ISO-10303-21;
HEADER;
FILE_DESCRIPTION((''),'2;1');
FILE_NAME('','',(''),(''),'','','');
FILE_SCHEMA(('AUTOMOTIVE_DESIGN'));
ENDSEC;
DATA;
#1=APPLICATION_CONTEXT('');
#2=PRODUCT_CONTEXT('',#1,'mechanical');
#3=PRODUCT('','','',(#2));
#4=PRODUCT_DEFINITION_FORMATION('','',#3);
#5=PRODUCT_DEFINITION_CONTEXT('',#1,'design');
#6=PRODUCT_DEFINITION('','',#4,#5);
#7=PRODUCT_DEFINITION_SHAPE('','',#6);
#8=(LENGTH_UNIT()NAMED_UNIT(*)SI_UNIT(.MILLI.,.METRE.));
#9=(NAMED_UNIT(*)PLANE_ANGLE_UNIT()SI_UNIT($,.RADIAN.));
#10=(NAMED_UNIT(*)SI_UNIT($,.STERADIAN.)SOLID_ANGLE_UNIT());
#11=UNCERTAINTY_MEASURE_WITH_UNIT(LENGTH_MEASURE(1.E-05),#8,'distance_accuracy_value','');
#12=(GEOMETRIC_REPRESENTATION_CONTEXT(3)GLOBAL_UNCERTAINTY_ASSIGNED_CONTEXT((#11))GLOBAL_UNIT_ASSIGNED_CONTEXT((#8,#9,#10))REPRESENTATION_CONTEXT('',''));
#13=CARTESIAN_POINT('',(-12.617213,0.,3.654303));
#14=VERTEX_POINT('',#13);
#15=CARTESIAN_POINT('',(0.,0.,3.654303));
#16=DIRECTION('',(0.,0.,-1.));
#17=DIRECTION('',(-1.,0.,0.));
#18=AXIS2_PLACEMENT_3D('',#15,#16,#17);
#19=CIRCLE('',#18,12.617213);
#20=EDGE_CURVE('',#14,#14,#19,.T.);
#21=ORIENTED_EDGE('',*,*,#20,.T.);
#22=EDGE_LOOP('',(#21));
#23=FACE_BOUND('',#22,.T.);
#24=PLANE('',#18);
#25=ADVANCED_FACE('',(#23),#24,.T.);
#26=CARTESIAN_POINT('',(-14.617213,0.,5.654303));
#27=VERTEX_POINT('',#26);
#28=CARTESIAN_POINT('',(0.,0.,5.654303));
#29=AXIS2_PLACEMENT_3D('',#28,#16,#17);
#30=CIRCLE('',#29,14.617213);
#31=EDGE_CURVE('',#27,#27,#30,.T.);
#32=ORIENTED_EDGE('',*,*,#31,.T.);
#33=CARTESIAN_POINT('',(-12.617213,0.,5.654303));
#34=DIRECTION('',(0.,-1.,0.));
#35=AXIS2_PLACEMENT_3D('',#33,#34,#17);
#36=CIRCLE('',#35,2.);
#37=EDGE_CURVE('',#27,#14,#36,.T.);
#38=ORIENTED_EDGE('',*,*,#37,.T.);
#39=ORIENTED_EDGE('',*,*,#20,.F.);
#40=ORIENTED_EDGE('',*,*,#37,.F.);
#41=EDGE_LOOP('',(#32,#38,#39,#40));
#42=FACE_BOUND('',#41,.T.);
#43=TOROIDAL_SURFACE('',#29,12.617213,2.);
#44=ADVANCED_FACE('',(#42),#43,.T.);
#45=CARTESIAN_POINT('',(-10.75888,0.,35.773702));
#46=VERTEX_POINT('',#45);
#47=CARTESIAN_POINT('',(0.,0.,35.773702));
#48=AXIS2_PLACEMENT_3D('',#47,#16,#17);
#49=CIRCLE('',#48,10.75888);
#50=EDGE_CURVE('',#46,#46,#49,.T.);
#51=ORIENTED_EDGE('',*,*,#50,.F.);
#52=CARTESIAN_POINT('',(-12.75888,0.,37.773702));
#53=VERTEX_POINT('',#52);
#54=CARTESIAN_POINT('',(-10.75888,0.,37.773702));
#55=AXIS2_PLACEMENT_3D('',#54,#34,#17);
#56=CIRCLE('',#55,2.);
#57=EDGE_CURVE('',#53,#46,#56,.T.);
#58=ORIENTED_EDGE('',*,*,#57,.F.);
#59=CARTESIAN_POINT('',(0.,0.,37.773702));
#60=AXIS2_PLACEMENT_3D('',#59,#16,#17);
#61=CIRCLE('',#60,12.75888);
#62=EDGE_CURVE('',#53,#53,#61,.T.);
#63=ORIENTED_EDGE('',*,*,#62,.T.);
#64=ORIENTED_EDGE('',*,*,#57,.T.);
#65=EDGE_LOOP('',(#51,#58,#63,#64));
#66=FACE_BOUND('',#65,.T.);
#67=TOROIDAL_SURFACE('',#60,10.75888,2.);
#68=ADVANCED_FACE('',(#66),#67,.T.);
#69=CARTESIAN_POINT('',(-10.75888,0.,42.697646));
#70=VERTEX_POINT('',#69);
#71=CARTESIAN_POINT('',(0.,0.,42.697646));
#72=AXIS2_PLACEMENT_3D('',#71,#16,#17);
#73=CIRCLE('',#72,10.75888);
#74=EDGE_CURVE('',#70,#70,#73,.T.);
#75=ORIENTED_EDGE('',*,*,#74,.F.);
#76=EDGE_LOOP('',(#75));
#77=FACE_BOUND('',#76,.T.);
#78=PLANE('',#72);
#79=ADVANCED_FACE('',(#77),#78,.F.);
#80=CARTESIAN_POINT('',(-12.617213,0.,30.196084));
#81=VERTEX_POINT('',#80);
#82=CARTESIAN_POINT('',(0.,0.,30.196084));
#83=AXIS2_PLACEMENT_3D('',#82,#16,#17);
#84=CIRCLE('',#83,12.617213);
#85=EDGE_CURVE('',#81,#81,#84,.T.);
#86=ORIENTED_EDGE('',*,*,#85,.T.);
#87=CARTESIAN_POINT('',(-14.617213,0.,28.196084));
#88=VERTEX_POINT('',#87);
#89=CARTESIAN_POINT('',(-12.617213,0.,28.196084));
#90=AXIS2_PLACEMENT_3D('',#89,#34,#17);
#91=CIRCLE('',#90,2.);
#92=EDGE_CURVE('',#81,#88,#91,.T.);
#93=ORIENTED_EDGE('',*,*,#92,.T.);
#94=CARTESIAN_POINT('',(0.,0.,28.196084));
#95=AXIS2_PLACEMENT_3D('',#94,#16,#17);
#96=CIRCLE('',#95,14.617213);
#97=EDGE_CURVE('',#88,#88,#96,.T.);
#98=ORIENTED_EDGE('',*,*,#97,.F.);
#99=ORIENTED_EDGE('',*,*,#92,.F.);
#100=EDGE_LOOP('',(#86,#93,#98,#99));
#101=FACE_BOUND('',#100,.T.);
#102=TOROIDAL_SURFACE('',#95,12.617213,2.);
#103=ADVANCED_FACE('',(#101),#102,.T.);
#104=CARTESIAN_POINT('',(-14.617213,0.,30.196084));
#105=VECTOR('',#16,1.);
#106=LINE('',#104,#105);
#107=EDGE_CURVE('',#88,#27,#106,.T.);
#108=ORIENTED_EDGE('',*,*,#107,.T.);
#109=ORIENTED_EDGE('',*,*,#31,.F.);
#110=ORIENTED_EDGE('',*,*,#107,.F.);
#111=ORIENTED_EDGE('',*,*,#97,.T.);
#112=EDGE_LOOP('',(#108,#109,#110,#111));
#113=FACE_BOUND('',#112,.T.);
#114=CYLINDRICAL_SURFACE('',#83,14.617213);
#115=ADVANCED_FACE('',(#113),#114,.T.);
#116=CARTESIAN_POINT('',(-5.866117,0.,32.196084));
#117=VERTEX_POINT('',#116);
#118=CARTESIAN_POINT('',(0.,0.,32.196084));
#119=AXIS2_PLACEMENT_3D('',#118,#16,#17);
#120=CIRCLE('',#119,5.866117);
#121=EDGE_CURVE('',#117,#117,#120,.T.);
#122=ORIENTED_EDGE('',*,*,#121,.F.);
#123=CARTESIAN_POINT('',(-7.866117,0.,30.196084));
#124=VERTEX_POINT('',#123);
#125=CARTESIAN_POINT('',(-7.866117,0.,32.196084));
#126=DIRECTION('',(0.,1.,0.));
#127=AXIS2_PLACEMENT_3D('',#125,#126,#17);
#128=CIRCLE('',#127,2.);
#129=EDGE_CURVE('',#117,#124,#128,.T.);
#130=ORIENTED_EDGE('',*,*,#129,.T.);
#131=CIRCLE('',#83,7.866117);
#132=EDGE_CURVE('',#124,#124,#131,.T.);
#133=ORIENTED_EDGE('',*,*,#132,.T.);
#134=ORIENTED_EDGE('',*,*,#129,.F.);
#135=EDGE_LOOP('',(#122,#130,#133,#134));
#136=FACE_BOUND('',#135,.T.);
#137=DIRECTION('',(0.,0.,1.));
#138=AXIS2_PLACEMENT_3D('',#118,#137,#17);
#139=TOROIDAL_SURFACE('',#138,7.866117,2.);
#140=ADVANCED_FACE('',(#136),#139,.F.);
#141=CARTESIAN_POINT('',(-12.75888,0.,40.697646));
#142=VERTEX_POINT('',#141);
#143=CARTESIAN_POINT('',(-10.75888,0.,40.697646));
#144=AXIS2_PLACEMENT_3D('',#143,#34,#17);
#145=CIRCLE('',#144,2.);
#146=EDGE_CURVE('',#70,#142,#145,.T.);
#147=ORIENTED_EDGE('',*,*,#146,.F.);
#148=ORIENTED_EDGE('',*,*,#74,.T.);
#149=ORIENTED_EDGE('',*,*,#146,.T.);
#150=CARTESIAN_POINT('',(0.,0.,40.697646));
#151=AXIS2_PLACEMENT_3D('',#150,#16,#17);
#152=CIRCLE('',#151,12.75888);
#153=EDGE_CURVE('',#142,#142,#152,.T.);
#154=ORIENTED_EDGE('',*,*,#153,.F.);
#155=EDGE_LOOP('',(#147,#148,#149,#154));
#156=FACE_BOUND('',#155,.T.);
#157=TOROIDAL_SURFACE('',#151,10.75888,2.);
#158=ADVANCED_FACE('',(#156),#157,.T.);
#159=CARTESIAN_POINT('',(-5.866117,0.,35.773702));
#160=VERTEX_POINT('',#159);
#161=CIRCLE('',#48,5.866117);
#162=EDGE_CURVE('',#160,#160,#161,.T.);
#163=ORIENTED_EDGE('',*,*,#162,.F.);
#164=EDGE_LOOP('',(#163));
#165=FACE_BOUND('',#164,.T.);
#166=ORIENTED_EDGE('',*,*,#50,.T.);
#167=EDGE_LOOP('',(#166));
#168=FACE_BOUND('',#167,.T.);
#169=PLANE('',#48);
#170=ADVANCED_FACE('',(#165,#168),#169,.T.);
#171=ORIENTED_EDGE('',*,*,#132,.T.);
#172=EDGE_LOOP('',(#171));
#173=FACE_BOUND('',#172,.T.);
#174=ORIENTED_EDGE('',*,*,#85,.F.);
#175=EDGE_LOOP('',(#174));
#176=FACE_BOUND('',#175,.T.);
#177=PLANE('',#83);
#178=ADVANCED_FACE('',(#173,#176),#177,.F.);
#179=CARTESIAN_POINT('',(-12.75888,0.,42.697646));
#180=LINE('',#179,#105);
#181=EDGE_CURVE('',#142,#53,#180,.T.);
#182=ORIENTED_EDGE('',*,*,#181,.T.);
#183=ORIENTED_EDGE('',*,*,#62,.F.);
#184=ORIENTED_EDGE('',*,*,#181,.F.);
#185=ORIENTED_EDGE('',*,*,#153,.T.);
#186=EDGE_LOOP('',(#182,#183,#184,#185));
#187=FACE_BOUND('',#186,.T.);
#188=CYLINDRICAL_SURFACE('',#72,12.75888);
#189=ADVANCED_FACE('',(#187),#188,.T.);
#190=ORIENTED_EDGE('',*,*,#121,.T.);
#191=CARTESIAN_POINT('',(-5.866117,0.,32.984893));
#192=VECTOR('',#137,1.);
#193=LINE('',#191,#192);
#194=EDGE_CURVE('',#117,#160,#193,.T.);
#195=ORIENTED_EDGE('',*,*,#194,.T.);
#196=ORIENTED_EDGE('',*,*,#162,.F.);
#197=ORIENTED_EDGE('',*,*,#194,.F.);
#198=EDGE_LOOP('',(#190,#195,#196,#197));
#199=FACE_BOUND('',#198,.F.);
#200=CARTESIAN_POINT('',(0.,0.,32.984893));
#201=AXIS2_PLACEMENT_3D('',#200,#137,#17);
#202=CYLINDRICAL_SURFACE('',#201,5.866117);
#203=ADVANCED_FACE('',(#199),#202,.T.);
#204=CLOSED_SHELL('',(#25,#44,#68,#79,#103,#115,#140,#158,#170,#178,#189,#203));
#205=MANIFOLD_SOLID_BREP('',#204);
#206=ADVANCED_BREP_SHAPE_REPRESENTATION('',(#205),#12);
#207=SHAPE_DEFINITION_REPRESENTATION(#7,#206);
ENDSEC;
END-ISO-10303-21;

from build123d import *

# Parameters (mm, degrees)
F0_W = 5.8661173098
F0_H = 5.5776182562
F2_R = 2
F3_R = 2


# Not quite as in the source:
# - a feature of the source that left no trace in its solid (it failed there, or was rolled back) is left out


with BuildPart() as f1:
    # F0 (on Front) → F1 (revolve)
    with BuildSketch(Plane.XZ):
        Polygon((0, 35.7737019658), (0, 42.6976457238), (-12.7588799223, 42.6976457238), (-12.7588799223, 35.7737019658), (-5.8661173098, 35.7737019658), align=None)
        with Locations((-2.9330586549, 32.9848928377)):
            Rectangle(F0_W, F0_H)
        Polygon((0, 3.6543027963), (0, 30.1960837096), (-5.8661173098, 30.1960837096), (-14.617213048, 30.1960837096), (-14.617213048, 3.6543027963), align=None)
    revolve(axis=Axis((0, 0, 23.1759742601), (0, 0, -1)))

    # F2
    f2_edges = [f1.edges().sort_by_distance(p)[0] for p in [
        (12.75888, 0, 42.697646),
        (5.866117, 0, 30.196084),
        (14.617213, 0, 30.196084),
    ]]
    fillet(f2_edges, radius=F2_R)

    # F3
    f3_edges = [f1.edges().sort_by_distance(p)[0] for p in [
        (12.75888, 0, 35.773702),
        (14.617213, 0, 3.654303),
    ]]
    fillet(f3_edges, radius=F3_R)


solid = f1.part
